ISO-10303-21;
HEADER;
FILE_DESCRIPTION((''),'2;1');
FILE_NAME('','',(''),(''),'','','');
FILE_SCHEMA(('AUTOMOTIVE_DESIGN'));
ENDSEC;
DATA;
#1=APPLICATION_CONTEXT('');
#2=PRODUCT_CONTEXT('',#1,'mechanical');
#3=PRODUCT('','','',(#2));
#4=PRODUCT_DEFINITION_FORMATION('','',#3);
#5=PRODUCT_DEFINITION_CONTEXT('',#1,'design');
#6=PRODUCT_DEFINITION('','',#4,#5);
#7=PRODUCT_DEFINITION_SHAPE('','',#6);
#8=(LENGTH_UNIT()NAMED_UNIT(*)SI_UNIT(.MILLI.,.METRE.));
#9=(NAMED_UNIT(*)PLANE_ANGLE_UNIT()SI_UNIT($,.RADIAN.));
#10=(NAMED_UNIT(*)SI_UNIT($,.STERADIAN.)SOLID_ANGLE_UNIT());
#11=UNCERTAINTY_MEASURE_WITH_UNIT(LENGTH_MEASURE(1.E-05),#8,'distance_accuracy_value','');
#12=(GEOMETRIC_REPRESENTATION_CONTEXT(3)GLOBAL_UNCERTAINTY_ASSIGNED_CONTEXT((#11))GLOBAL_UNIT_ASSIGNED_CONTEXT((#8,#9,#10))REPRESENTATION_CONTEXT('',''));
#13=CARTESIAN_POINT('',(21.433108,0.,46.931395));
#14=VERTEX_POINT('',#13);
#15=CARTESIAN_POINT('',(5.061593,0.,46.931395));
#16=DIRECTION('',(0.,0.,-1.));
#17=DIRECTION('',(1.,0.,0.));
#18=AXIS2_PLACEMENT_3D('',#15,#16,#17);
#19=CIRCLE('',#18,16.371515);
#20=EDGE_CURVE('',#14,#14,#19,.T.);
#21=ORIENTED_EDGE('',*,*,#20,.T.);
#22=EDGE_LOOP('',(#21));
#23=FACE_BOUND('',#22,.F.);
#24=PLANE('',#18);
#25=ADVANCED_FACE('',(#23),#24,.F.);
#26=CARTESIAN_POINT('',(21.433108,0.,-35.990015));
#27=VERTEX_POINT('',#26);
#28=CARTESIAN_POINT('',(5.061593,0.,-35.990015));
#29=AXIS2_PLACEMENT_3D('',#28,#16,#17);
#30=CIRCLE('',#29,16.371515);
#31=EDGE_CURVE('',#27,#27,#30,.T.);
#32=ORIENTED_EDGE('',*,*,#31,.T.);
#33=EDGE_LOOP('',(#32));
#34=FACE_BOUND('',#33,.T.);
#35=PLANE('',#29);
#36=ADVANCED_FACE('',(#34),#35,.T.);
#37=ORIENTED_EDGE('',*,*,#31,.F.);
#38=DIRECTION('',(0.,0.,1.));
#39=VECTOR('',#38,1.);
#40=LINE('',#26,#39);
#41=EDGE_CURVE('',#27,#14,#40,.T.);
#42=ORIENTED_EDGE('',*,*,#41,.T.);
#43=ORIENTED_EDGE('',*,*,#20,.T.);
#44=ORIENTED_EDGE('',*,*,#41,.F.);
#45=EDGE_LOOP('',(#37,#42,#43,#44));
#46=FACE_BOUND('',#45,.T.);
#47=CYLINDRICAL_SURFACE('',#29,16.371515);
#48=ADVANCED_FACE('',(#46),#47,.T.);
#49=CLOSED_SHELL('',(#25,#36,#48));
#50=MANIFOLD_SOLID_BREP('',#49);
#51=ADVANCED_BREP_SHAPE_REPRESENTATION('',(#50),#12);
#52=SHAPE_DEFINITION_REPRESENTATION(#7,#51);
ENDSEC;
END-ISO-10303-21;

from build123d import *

# Parameters (mm, degrees)
F3_R     = 16.3715148317
F4_DEPTH = 82.92141


# Not quite as in the source:
# - a feature of the source that left no trace in its solid (it failed there, or was rolled back) is left out
# - the program builds the solid bodies; features that only make, move or delete a surface that nothing else refers to are left out


with BuildPart() as f4:
    # F3 (on face) → F4 (new body)
    with BuildSketch(Plane(origin=(0, 0, -35.9900146723), x_dir=(1, 0, 0), z_dir=(0, 0, -1))):
        with Locations((5.0615929067, 0)):
            Circle(F3_R)
    extrude(amount=-F4_DEPTH)


solid = f4.part
